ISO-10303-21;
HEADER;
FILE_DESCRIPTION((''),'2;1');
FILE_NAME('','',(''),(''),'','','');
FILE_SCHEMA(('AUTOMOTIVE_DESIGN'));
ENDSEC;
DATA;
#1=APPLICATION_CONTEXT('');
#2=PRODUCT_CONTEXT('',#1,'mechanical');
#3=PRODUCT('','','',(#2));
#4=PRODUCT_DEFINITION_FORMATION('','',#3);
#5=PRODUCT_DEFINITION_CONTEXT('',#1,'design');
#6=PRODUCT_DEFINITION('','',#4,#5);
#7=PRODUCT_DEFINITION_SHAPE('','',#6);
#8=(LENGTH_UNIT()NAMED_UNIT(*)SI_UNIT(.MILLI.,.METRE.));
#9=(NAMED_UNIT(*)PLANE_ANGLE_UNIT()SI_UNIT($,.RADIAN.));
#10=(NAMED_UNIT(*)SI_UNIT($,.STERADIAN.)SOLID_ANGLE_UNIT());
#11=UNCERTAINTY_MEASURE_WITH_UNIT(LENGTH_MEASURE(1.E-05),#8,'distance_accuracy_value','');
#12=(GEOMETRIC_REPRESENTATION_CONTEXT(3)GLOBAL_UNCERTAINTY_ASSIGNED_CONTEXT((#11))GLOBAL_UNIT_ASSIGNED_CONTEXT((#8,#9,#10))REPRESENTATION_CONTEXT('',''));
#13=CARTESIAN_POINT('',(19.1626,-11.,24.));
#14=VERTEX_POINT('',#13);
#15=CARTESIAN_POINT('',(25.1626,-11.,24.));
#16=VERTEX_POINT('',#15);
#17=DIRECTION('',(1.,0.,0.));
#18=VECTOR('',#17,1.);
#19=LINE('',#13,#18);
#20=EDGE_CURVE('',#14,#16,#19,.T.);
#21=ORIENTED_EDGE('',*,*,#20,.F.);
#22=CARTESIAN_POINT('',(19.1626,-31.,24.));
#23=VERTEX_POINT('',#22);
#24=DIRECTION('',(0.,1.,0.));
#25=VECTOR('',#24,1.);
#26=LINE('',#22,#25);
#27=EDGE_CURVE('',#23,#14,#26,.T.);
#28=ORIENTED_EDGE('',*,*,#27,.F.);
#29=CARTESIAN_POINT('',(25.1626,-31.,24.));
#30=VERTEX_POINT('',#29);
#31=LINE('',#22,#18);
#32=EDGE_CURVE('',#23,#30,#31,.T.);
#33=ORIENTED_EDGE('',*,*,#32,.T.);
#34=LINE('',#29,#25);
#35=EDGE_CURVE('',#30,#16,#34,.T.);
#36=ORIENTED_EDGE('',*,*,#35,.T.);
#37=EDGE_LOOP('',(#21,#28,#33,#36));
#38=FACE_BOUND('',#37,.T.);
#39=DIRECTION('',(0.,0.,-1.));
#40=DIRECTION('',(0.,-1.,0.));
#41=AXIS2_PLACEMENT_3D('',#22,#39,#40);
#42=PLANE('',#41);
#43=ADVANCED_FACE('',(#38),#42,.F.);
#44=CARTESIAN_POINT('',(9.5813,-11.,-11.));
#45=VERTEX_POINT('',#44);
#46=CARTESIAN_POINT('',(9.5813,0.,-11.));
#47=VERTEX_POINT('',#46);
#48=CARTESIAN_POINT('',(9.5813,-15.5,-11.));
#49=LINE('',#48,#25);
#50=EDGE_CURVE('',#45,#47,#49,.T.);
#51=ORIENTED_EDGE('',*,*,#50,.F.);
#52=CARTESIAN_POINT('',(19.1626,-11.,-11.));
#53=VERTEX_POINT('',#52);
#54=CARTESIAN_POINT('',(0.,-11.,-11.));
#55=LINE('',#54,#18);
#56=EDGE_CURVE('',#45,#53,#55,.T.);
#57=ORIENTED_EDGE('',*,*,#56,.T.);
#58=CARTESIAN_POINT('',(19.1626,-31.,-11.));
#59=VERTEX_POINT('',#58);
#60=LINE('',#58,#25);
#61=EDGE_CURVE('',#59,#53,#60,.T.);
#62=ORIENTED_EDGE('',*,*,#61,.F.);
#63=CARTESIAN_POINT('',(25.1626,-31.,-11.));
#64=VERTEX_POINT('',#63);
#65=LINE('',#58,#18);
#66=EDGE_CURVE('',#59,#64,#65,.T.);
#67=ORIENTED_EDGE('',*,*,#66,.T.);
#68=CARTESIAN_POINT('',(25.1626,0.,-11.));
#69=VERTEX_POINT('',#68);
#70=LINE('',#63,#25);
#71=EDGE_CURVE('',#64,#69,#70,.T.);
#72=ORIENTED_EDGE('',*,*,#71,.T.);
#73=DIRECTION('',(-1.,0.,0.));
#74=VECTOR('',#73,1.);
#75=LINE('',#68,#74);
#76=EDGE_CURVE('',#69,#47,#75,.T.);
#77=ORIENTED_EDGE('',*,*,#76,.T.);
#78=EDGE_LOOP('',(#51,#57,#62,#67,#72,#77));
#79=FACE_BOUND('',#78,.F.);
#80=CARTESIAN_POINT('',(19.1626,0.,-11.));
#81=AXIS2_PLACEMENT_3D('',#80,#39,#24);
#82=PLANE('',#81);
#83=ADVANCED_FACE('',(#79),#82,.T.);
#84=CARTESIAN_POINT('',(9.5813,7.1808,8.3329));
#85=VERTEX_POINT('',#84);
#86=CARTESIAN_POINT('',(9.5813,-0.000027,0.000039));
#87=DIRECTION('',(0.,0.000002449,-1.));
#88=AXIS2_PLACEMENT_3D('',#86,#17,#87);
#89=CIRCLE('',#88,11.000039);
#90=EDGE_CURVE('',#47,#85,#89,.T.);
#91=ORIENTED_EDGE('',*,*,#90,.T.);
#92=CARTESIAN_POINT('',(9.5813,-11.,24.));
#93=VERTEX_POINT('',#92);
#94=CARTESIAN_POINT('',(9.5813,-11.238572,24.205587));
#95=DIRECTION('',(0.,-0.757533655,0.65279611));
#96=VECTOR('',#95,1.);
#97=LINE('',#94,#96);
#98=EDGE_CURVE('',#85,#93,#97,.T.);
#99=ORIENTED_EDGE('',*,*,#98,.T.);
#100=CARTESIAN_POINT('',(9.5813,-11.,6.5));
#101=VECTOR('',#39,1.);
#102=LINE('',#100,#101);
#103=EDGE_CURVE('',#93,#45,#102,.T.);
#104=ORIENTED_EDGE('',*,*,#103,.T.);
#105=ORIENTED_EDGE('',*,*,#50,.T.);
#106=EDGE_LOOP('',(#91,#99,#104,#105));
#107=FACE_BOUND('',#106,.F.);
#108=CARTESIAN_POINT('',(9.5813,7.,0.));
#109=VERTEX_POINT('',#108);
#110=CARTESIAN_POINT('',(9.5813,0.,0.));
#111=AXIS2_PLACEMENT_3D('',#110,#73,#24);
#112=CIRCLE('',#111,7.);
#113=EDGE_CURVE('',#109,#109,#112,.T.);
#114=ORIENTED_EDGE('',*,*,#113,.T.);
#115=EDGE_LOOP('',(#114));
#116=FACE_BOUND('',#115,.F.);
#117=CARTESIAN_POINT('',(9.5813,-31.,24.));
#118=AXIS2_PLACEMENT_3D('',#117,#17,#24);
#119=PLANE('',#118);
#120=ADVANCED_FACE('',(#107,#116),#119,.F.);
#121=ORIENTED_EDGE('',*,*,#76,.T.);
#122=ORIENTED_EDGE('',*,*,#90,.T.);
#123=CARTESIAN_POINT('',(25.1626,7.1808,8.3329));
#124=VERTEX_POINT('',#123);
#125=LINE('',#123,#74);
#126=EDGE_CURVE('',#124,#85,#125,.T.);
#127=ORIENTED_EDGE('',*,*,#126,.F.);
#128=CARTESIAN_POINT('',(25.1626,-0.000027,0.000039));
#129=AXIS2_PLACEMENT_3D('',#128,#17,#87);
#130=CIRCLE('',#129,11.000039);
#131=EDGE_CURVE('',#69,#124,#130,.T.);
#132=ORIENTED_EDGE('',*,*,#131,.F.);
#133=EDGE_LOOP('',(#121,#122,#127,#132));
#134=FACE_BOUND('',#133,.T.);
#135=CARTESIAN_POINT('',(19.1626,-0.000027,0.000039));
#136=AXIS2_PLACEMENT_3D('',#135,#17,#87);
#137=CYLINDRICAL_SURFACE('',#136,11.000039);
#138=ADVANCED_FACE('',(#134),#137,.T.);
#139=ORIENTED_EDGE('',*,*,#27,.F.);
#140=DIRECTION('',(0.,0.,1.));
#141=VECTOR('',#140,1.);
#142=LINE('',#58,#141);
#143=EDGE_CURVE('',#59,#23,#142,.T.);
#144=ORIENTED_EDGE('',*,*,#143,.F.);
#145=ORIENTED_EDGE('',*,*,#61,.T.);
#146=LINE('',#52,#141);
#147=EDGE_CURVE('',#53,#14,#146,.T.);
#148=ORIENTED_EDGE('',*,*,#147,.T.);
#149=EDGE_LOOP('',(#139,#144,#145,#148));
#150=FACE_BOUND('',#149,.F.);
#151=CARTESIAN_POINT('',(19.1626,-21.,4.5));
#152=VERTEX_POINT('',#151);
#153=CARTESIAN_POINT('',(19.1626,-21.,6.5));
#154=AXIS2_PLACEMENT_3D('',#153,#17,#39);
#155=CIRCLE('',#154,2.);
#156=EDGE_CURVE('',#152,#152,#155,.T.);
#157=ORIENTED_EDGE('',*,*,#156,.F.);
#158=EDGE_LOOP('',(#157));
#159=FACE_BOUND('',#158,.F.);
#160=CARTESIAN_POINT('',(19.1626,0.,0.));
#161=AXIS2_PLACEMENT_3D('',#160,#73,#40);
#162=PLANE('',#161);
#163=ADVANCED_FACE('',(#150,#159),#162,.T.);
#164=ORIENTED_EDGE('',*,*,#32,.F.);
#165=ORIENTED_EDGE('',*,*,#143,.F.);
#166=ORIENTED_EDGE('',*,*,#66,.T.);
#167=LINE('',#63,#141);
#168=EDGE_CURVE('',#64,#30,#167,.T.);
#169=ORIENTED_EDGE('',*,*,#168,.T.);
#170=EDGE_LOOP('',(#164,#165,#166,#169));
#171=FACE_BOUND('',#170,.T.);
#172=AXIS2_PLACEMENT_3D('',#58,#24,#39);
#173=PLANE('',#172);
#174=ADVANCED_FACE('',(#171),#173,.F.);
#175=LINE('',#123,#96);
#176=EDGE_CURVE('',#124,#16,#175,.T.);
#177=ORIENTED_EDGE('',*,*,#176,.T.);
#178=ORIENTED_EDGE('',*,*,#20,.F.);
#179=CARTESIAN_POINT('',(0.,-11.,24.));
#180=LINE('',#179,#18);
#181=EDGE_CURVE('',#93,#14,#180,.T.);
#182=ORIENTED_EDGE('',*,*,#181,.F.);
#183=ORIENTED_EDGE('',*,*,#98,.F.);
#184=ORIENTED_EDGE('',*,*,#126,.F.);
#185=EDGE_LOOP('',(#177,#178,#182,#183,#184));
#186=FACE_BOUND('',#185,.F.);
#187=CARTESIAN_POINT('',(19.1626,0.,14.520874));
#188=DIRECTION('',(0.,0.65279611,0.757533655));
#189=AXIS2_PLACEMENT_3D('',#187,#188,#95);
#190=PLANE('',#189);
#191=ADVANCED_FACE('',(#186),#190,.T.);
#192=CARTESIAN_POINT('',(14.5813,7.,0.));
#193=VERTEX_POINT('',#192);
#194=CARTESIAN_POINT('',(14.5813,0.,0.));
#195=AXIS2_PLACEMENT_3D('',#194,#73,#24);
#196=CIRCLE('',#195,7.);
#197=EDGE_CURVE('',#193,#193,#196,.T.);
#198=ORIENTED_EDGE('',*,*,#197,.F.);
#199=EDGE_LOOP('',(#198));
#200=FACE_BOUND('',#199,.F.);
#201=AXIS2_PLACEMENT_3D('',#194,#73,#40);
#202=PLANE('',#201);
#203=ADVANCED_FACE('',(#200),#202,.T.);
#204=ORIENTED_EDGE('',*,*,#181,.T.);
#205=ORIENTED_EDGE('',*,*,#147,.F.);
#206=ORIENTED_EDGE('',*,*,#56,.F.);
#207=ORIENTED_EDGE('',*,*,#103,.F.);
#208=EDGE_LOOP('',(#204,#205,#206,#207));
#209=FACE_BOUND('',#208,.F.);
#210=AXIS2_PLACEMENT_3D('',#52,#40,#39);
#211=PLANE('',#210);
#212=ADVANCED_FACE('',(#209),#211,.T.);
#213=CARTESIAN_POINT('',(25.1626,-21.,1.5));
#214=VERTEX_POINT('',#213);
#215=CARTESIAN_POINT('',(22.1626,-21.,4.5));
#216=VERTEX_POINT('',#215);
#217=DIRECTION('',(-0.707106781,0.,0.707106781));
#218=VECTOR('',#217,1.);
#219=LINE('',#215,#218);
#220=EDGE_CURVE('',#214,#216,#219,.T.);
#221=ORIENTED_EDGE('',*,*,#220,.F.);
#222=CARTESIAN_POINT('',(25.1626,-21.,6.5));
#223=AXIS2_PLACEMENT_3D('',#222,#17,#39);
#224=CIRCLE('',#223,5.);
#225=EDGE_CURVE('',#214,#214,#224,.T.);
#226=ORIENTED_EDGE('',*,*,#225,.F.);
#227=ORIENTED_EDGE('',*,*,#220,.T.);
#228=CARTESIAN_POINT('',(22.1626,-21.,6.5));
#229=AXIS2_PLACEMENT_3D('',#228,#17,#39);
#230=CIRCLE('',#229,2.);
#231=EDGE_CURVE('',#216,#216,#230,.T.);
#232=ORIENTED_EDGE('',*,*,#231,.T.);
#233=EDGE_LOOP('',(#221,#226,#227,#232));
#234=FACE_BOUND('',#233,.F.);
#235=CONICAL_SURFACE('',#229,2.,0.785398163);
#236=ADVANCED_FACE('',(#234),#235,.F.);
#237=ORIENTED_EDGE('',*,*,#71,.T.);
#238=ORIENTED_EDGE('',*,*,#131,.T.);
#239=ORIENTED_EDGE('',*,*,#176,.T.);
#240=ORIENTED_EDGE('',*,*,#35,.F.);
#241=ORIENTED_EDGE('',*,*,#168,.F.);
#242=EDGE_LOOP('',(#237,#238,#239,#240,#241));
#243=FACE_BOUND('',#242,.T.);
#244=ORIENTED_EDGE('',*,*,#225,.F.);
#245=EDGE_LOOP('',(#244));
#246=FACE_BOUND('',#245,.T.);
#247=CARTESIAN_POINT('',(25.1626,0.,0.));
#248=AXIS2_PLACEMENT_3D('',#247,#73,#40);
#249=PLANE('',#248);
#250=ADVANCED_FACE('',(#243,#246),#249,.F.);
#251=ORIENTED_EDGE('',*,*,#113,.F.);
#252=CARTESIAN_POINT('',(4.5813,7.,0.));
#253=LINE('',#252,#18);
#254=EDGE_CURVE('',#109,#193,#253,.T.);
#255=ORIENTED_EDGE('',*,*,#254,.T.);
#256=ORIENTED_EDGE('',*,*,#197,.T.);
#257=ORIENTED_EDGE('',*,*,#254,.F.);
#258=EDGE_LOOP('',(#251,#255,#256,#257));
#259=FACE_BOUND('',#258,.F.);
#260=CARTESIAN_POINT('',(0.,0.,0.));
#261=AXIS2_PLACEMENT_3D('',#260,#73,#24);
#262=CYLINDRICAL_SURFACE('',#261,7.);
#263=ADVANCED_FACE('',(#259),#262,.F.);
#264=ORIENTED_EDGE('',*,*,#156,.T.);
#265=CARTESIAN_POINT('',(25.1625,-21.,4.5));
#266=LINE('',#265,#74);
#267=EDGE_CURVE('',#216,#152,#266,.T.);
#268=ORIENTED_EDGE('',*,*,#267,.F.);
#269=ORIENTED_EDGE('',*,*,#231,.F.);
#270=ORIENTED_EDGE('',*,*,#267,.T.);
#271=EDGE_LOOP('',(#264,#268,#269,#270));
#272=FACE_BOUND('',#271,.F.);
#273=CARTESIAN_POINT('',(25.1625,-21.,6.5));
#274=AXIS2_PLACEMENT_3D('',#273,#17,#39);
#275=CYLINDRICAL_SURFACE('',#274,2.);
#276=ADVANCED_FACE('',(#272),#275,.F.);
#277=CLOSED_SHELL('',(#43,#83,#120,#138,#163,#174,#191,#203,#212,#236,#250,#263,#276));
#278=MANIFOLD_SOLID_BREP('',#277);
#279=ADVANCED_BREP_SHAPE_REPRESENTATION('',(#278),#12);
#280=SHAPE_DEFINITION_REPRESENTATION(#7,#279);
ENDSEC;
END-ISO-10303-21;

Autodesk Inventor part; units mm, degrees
ref_plane "YZ Plane" through (0, 0, 0) normal (1, 0, 0) x (0, 1, 0)
ref_plane "XZ Plane" through (0, 0, 0) normal (0, 1, 0) x (-1, 0, 0)
ref_plane "XY Plane" through (0, 0, 0) normal (0, 0, 1) x (1, 0, 0)
sketch "Sketch1" plane through (0, 0, 0) normal (1, 0, 0) x (0, 1, 0)
  circle A0 centre (0, 0) radius 7
  line L0 (0, -11) -> (-31, -11)
  line L1 (-31, -11) -> (-31, 24)
  line L2 (-11, -11) -> (-11, 24)
  line L3 (-31, 24) -> (-11, 24)
  line L4 (0, -20.9958) -> (0, 31.4993) projected
  arc A1 (0, -11) -> (7.1808, 8.3329) centre (0, 0) ccw
  line L5 (-11, 24) -> (7.1808, 8.3329)
  dimension "d0" = 14
  dimension "d3" = 11
  dimension "d4" = 35
  dimension "d6" = 22
  dimension "d7" = 31
extrude "Extrusion1" add sketch "Sketch1" along normal blind 9.5813 contours A0 L4 L5 A1 | A0 L4 L0 L2 L5
extrude "Extrusion2" add sketch "Sketch1" along normal blind 4.5813 contours A0 L4 | L4 A0
extrude "Extrusion3" add sketch "Sketch1" against normal blind 6
mirror "Mirror1" about plane through (9.5813, 0, 6.5) normal (1, 0, 0) of "Extrusion1", "Extrusion2", "Extrusion3"
sketch "Sketch2" plane through (0, -31, 24) normal (0, 0, 1) x (1, 0, 0)
  line L0 (-6, 31) -> (-6, 0) projected
  line L1 (-6, 0) -> (9.5813, 0)
  line L2 (9.5813, 0) -> (9.5813, 45.1625)
  line L3 (9.5813, 45.1625) -> (-6, 45.1625)
  line L4 (-6, 45.1625) -> (-6, 0)
  point P0 (0, 31)
extrude "Extrusion4" cut sketch "Sketch2" against normal through all
sketch "Sketch3" plane through (25.1625, -31, -11) normal (1, 0, 0) x (0, 0, -1)
  circle A0 centre (-17.5, 10) radius 2
  line L0 (-35, 0) -> (-35, 20) projected
  line L1 (0, 0) -> (-35, 0) projected
  point P0 (-11, 31)
  point P1 (-35, 10)
  point P2 (-17.5, 0)
  dimension "d16" = 4
  dimension "d17" = 0
  dimension "d18" = 0
extrude "Extrusion5" cut sketch "Sketch3" against normal blind 10
chamfer "Chamfer1" distance 3 angle 45 1 edges at (25.1625, -21, 8.5)
properties part number "bearing_holder_v2_right"
